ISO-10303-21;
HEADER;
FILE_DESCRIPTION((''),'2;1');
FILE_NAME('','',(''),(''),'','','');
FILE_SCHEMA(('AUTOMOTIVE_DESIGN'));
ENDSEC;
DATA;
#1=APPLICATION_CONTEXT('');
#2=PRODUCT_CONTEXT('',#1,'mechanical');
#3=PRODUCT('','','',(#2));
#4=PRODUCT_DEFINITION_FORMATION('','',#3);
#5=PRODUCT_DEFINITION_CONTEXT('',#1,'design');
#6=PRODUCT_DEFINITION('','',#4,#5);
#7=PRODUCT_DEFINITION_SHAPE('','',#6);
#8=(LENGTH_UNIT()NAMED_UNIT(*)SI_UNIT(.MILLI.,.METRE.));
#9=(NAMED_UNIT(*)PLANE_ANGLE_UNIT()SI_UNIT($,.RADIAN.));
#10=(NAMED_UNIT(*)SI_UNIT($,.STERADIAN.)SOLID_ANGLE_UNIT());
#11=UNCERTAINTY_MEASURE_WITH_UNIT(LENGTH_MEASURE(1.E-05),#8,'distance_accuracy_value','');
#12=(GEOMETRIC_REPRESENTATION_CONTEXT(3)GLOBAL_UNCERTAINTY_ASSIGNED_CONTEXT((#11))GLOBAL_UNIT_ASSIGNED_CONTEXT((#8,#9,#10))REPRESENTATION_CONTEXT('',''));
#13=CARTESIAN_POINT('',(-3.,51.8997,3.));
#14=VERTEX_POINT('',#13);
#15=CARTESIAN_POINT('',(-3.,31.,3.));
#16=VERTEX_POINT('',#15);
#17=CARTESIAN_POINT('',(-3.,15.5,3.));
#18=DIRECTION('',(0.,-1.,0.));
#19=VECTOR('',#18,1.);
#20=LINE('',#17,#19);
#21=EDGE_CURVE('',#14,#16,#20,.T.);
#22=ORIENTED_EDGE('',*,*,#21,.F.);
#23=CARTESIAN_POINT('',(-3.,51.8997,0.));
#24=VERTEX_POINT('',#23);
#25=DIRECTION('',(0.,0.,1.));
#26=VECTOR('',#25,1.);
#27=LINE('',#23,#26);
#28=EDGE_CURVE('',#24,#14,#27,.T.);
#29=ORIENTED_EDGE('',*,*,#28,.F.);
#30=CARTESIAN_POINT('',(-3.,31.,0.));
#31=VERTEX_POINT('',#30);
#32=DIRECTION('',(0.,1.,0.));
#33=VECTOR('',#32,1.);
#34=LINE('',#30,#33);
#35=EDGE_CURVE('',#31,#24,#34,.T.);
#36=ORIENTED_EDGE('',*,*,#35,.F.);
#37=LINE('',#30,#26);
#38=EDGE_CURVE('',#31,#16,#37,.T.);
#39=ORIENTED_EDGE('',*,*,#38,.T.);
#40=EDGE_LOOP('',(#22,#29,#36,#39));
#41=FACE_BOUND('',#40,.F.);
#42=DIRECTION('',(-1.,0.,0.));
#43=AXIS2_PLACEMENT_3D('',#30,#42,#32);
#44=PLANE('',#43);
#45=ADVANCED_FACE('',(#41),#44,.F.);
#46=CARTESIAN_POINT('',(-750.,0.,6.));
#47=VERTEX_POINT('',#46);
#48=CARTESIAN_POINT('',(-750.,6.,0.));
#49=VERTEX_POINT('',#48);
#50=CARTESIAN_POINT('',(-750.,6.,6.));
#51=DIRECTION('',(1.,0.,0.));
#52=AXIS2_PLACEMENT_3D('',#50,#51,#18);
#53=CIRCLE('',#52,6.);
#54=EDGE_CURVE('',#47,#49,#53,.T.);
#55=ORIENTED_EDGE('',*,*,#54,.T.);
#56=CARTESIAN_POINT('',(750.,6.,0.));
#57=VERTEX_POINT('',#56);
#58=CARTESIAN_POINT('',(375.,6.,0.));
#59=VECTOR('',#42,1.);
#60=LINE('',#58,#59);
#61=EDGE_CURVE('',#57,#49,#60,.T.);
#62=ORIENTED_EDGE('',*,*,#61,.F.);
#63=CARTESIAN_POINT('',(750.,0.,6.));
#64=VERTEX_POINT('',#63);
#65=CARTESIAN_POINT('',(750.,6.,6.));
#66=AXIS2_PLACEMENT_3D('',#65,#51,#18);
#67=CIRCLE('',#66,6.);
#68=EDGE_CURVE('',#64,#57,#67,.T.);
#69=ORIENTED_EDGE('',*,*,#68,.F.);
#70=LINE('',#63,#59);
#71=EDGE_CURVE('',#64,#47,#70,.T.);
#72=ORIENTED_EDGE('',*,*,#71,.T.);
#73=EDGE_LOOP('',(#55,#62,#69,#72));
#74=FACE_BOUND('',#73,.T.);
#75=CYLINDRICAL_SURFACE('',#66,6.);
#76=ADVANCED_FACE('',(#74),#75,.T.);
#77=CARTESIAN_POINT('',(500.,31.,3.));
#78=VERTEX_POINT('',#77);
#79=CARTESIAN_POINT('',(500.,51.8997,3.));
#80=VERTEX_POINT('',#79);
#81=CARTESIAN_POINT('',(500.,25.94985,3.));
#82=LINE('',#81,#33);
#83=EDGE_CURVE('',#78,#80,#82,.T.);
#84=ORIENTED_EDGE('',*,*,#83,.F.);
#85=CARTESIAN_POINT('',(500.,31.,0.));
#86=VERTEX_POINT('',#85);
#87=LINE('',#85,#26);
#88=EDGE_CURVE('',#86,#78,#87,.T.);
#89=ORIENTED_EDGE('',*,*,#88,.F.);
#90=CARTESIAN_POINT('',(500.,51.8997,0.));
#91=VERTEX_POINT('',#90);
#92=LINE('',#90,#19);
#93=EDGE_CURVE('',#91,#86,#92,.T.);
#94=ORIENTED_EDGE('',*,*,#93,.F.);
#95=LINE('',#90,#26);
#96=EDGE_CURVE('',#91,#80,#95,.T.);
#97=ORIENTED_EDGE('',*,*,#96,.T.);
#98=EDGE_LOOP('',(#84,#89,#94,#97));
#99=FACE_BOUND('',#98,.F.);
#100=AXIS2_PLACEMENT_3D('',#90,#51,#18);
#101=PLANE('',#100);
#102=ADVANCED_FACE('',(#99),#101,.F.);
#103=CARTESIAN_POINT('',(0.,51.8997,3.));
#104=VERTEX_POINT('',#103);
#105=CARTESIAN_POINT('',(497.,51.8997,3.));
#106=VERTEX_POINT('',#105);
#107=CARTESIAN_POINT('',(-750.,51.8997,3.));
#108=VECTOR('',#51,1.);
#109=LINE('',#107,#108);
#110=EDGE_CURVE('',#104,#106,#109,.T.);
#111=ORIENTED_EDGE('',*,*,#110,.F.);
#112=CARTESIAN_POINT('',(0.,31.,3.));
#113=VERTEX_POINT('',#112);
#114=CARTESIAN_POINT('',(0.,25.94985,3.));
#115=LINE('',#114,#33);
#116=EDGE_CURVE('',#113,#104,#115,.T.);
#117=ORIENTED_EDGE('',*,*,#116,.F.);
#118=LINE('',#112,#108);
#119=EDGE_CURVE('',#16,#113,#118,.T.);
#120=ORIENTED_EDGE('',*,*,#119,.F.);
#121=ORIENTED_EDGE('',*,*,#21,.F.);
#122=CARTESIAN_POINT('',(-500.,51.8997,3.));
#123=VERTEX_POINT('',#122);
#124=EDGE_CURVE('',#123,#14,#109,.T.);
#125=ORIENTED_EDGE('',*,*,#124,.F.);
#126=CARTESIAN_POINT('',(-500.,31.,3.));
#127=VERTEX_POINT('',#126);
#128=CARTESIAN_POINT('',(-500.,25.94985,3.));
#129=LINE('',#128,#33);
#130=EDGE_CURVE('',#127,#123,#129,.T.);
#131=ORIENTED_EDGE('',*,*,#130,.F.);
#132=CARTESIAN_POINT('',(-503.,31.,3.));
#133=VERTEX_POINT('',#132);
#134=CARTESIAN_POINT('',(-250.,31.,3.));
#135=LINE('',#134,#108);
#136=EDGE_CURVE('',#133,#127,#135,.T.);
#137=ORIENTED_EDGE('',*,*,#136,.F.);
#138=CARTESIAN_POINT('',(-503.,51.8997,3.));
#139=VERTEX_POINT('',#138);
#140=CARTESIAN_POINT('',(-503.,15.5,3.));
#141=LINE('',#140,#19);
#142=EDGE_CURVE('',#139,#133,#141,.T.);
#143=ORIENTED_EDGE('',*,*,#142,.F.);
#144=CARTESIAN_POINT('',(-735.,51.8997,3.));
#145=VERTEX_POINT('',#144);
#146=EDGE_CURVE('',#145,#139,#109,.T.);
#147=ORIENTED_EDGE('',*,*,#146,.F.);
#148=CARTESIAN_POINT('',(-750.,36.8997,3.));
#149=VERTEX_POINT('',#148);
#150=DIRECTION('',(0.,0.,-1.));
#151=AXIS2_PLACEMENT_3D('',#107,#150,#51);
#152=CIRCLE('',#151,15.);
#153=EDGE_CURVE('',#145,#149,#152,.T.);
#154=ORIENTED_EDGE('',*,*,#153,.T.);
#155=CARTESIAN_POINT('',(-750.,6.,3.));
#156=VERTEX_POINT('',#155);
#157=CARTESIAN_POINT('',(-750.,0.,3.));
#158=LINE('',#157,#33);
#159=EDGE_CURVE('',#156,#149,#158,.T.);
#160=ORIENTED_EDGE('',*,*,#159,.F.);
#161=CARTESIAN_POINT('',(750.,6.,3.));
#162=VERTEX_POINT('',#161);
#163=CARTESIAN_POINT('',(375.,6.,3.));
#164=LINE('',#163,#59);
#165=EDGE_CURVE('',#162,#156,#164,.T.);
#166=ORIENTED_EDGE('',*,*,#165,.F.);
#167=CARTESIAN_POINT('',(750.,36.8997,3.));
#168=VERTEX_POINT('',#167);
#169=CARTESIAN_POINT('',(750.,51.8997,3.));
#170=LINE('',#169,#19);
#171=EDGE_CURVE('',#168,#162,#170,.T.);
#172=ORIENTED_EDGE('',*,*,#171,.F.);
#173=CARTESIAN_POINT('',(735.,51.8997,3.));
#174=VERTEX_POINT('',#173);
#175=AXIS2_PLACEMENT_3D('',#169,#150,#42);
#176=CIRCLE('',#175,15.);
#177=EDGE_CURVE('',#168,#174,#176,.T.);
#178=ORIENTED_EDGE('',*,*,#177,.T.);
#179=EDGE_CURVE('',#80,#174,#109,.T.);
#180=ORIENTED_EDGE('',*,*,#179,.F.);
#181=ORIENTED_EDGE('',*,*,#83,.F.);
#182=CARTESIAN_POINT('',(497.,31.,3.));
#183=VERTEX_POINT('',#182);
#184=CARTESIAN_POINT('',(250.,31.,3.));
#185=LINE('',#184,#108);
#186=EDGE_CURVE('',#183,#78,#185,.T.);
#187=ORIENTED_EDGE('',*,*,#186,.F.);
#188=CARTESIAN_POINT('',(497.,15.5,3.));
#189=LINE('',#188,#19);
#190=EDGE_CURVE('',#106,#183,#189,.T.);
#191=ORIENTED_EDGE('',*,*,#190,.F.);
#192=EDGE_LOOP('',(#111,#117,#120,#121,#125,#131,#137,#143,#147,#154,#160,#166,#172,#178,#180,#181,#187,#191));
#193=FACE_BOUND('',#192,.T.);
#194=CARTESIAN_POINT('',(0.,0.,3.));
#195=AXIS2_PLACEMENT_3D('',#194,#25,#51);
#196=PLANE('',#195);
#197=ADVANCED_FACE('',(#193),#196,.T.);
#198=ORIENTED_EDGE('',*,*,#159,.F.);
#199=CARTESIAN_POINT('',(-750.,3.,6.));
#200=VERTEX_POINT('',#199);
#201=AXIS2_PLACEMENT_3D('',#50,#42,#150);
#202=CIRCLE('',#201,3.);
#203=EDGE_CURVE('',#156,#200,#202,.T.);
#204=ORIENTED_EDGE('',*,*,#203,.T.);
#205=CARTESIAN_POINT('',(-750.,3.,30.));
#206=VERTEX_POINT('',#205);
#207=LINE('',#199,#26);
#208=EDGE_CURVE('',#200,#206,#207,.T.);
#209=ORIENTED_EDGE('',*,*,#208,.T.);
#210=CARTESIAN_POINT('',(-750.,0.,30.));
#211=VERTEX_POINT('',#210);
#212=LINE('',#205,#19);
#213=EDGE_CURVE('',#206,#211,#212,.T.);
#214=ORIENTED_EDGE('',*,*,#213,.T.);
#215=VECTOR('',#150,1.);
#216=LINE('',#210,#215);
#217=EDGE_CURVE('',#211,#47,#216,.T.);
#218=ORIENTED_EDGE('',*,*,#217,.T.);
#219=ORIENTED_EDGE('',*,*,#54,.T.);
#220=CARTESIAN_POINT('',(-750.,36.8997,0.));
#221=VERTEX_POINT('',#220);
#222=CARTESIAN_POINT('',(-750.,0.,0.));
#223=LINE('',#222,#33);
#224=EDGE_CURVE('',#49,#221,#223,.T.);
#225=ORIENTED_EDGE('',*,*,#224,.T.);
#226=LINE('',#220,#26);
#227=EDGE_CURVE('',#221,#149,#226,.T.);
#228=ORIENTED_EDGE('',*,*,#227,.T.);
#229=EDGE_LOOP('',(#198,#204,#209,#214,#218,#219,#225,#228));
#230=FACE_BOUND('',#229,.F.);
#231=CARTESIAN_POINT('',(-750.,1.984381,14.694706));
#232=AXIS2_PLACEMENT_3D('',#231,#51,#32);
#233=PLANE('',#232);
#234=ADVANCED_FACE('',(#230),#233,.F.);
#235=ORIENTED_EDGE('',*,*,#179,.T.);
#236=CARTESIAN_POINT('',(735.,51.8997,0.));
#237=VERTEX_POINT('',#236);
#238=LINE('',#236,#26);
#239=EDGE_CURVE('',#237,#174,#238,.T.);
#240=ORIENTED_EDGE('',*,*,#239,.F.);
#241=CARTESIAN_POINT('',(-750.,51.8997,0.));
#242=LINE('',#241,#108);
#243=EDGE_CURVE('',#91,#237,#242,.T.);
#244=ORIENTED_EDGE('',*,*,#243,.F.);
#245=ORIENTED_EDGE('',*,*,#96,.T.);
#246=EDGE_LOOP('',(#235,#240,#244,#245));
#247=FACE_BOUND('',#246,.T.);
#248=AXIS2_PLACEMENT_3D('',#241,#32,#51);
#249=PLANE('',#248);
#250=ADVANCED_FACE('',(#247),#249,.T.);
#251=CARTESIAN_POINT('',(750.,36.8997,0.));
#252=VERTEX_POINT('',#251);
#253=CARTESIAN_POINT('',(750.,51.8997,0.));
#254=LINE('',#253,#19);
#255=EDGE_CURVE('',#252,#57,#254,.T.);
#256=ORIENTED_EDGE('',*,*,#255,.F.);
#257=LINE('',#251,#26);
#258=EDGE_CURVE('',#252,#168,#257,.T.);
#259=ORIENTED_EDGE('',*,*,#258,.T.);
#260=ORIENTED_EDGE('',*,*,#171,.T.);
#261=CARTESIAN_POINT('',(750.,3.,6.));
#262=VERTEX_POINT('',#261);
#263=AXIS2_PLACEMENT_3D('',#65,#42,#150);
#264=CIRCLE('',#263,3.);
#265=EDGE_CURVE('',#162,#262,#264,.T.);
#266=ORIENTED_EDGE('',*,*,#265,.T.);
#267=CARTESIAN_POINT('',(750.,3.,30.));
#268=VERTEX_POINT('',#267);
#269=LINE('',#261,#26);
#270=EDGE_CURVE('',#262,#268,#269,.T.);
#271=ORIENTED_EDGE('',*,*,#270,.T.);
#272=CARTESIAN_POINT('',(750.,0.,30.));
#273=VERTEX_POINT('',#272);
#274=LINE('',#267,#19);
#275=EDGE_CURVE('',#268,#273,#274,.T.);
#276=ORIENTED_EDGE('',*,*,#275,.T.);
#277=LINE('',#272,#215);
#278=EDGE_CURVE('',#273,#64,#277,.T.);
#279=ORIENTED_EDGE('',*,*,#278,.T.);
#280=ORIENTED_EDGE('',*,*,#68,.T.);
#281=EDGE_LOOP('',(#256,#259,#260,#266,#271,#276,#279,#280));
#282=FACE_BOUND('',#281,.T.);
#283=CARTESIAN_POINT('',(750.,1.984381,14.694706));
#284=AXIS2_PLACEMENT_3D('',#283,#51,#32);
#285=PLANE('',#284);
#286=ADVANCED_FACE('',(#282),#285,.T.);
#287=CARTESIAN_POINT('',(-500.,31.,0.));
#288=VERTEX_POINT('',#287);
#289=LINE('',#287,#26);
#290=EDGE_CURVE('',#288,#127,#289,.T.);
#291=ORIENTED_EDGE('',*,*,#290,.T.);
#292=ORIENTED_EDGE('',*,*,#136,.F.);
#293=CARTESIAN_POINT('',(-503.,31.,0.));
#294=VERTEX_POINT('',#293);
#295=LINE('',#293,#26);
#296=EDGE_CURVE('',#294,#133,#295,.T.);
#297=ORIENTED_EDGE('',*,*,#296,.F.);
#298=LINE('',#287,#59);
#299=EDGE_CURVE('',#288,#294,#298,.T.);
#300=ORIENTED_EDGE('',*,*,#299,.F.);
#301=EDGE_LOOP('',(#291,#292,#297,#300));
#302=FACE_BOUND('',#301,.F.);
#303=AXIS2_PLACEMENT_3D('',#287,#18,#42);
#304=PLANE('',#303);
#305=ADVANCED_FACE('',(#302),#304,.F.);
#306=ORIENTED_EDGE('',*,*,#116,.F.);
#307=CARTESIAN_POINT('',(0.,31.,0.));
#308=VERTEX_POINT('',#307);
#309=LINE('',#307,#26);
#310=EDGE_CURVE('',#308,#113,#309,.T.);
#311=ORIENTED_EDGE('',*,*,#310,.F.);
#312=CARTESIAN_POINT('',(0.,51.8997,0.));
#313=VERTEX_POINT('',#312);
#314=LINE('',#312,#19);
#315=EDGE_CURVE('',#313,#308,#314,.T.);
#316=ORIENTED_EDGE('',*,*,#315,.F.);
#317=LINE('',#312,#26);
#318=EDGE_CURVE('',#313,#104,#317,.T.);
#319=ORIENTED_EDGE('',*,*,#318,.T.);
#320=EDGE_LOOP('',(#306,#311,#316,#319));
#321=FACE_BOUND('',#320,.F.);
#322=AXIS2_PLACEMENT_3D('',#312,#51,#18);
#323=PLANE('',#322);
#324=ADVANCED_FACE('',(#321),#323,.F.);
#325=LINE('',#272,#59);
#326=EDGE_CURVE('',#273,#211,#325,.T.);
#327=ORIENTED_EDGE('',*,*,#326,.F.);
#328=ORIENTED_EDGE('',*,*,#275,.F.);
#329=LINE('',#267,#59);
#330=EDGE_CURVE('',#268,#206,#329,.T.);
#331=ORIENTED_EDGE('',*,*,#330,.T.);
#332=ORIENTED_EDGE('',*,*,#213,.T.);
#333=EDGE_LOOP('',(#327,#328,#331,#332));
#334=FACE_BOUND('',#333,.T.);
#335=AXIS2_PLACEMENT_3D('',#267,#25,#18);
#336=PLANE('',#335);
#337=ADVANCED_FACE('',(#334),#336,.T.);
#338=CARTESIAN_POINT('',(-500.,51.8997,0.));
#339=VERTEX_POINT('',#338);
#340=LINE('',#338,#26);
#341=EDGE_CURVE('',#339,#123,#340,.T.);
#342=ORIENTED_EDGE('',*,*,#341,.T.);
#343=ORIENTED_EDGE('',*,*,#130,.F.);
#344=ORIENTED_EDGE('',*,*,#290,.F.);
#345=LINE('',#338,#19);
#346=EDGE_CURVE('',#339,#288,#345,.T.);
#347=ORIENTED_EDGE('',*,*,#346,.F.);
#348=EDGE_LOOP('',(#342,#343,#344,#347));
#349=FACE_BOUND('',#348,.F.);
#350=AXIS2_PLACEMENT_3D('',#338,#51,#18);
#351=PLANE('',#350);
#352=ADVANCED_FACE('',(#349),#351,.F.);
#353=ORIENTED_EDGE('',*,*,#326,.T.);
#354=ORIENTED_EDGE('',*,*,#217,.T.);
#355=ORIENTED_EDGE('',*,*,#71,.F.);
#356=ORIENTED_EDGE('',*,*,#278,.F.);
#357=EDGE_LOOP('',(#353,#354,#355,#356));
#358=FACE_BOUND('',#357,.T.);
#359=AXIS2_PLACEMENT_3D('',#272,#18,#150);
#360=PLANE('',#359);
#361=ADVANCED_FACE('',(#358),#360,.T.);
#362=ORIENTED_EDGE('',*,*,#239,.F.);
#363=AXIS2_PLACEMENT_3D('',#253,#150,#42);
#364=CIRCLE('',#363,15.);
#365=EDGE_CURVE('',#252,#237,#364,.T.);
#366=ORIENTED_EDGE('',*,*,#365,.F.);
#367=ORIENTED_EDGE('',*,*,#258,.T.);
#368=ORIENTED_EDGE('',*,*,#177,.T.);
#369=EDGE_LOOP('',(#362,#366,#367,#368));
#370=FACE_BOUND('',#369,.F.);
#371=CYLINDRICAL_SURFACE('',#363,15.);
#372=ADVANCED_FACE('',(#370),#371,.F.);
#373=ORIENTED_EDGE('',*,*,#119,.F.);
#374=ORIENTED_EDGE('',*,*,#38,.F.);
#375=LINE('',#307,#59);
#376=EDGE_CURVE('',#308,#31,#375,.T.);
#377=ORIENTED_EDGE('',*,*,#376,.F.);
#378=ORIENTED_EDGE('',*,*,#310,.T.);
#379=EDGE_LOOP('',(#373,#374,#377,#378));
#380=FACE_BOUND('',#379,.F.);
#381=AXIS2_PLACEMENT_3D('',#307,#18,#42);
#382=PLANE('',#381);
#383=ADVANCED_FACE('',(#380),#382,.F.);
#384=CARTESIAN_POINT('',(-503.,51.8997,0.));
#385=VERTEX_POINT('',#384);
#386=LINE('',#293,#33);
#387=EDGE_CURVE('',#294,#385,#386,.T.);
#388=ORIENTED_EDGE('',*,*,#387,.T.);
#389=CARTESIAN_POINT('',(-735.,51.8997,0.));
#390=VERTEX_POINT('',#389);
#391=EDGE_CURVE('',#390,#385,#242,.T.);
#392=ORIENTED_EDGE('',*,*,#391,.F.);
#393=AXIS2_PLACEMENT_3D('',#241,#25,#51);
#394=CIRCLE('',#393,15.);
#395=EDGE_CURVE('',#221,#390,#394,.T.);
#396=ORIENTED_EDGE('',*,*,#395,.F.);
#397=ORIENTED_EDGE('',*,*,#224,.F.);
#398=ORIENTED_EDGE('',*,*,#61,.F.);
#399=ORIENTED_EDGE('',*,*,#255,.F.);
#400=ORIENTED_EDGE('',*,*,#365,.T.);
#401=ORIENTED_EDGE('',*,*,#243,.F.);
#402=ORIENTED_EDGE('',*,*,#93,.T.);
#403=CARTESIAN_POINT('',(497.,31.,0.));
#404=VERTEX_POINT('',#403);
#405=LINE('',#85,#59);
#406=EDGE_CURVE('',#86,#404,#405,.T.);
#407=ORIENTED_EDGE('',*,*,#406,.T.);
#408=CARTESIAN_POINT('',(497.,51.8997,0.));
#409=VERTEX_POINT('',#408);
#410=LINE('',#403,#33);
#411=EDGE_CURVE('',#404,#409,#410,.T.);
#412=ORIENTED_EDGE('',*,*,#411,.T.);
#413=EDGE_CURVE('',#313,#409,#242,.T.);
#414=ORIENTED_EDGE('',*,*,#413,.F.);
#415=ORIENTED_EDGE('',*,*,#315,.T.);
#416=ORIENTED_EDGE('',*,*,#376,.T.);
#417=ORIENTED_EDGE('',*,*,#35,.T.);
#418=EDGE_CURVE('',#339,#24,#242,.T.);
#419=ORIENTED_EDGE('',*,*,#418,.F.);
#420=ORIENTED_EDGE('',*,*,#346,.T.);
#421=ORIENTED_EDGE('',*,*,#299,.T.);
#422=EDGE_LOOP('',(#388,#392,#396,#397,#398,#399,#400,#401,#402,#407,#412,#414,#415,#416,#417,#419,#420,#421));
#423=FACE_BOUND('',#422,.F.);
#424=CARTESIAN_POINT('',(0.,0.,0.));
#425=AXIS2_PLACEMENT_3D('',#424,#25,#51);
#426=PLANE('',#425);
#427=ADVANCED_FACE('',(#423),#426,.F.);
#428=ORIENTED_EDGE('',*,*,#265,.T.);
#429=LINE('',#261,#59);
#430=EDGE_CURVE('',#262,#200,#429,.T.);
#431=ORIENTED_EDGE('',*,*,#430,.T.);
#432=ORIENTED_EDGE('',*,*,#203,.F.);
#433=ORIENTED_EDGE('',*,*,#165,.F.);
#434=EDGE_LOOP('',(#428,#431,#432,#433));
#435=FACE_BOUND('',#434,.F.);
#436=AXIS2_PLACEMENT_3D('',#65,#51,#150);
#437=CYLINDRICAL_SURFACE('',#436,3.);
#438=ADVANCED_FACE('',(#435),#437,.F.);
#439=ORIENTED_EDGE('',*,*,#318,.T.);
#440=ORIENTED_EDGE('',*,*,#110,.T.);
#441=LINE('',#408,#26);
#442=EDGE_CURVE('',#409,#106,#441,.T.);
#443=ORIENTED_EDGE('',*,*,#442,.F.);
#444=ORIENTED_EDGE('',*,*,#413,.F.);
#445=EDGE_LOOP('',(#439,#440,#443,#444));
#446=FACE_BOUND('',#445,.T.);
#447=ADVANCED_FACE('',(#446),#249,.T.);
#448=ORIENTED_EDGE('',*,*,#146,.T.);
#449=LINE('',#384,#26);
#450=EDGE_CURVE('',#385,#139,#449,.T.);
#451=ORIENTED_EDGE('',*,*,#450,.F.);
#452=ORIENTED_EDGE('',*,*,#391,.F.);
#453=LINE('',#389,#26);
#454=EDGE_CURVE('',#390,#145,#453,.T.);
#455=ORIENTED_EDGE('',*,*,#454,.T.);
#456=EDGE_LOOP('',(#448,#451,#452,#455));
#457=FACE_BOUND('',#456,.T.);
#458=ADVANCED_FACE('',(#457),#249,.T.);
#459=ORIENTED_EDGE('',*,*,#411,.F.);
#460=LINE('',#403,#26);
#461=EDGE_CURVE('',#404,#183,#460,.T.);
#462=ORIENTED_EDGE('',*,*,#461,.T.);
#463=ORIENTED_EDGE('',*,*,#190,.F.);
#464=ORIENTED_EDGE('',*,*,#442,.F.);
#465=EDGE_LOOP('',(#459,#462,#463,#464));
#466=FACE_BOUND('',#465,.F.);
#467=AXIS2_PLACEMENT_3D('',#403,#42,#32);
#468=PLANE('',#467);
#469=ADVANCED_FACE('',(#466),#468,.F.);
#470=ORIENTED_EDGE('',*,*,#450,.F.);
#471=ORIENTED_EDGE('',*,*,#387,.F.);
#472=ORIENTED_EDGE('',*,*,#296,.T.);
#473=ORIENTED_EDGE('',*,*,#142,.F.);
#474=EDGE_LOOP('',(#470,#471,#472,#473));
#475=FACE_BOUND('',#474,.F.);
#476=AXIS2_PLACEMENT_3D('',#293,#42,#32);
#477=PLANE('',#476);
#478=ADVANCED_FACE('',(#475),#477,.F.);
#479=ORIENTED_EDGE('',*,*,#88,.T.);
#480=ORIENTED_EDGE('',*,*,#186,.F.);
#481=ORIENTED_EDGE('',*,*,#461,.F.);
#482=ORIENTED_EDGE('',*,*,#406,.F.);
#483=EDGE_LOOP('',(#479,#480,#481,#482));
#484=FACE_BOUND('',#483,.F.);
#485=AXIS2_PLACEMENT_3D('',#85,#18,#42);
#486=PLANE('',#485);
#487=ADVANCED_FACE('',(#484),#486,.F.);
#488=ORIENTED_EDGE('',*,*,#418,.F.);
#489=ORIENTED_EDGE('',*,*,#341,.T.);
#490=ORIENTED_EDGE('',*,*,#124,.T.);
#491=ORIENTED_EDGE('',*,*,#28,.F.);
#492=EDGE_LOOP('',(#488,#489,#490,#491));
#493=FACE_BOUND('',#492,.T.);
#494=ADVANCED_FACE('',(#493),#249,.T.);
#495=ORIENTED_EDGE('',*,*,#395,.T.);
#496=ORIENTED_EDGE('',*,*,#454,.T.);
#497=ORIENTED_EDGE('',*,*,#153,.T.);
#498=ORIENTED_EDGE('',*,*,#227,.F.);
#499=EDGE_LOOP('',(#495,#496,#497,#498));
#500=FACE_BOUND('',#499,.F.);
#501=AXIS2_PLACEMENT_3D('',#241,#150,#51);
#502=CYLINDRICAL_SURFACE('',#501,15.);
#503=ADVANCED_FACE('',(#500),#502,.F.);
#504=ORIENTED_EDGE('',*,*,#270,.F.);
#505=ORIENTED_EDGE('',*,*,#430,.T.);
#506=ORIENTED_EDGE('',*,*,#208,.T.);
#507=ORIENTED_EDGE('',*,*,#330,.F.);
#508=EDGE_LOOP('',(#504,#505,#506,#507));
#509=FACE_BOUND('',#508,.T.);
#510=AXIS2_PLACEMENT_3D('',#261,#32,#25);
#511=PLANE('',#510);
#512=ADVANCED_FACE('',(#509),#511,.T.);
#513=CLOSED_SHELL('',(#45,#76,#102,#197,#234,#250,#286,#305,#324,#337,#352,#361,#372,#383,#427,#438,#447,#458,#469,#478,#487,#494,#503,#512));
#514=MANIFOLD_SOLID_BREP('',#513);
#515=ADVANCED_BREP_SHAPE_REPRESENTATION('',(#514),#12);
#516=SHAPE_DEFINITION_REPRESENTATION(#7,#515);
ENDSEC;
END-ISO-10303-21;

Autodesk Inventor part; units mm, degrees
ref_plane "YZ Plane" through (0, 0, 0) normal (1, 0, 0) x (0, 1, 0)
ref_plane "XZ Plane" through (0, 0, 0) normal (0, 1, 0) x (-1, 0, 0)
ref_plane "XY Plane" through (0, 0, 0) normal (0, 0, 1) x (1, 0, 0)
sketch "Sketch1" plane through (0, 0, 0) normal (0, 0, 1) x (1, 0, 0)
  line L0 (-750, 51.8997) -> (750, 51.8997)
  line L1 (750, 51.8997) -> (750, 0)
  line L2 (750, 0) -> (-750, 0)
  line L3 (-750, 0) -> (-750, 51.8997)
  point P0 (0, 0)
  point P1 (0, 0)
  dimension "d0" = 1500
  dimension "d1" = 51.8997
extrude "Plate1" add sketch "Sketch1" along normal blind 3
sketch "Sketch2" plane through (750, 3, 0) normal (0, -1, 0) x (1, 0, 0)
  line L0 (-1500, 0) -> (0, 0)
  line L1 (0, 0) -> (0, 30)
  line L2 (0, 30) -> (-1500, 30)
  line L3 (-1500, 30) -> (-1500, 0)
edge flange "Flange1" height 30 angle 90 thickness 3 bend radius 3 thickness toward (0, -1, 0) relief tear relief width 3 relief depth 1.5 edges at (0, 0, 3) wall of the first edge with corners at (-750, 3, 0) (750, 3, 0) (750, 3, 30) (-750, 3, 30)
bend "Bend1"
corner "Corner1"
sketch "Sketch5" plane through (0, 0, 0) normal (0, 0, -1) x (-1, 0, 0)
  line L0 (750, 51.8997) -> (-750, 51.8997) projected
  line L1 (500, 51.8997) -> (500, 31)
  line L2 (500, 31) -> (503, 31)
  line L3 (503, 31) -> (503, 51.8997)
  line L4 (750, 0) -> (-750, 0) projected
  point P0 (0, 0)
  dimension "d18" = 3
  dimension "d19" = 247
  dimension "d20" = 31
extrude "Extrusion1" cut sketch "Sketch5" against normal through all
pattern_linear "Rectangular Pattern1" count 3 spacing 500 along (1, 0, 0) of "Extrusion1"
sketch "Sketch6" plane through (0, 0, 0) normal (0, 0, -1) x (-1, 0, 0)
  line L0 (-750, 51.8997) -> (-750, 6) projected
  circle A0 centre (-750, 51.8997) radius 15
  line L1 (-750, 51.8997) -> (-500, 51.8997) projected
  point P0 (0, 0)
  point P1 (-735, 51.8997)
  point P2 (-750, 36.8997)
  dimension "d24" = 30
extrude "Extrusion2" cut sketch "Sketch6" against normal through all contours L1 A0 L0 picked at (-740.1254, 50.7871)
mirror "Mirror1" about plane through (0, 0, 0) normal (1, 0, 0) of "Extrusion2"
equation "\"d1\" = Стрингер_5"
equation "\"d18\" = Thickness"
equation "\"d2\" = Thickness"
equation "\"d3\" = BendReliefWidth"
equation "\"d4\" = BendReliefDepth"
equation "\"d5\" = MinimumRemnant"
equation "\"d6\" = TransitionRadius"
equation "\"d9\" = BendRadius"
equation "\"d10\" = CornerReliefSize"
equation "\"d11\" = GapSize"
equation "\"d12\" = JacobiRadiusSize"
equation "\"BendRadius\" = Thickness"
equation "\"BendReliefWidth\" = Thickness"
equation "\"BendReliefDepth\" = 0.5 * Thickness"
equation "\"CornerReliefSize\" = 4 * Thickness"
equation "\"MinimumRemnant\" = 2 * Thickness"
equation "\"TransitionRadius\" = BendRadius"
equation "\"JacobiRadiusSize\" = BendRadius"
equation "\"GapSize\" = Thickness"
equation "\"Стрингер_5\" = 51.899679"
equation "\"Thickness\" = 3"
properties part number "МОО 055 стрингер борт 5"
